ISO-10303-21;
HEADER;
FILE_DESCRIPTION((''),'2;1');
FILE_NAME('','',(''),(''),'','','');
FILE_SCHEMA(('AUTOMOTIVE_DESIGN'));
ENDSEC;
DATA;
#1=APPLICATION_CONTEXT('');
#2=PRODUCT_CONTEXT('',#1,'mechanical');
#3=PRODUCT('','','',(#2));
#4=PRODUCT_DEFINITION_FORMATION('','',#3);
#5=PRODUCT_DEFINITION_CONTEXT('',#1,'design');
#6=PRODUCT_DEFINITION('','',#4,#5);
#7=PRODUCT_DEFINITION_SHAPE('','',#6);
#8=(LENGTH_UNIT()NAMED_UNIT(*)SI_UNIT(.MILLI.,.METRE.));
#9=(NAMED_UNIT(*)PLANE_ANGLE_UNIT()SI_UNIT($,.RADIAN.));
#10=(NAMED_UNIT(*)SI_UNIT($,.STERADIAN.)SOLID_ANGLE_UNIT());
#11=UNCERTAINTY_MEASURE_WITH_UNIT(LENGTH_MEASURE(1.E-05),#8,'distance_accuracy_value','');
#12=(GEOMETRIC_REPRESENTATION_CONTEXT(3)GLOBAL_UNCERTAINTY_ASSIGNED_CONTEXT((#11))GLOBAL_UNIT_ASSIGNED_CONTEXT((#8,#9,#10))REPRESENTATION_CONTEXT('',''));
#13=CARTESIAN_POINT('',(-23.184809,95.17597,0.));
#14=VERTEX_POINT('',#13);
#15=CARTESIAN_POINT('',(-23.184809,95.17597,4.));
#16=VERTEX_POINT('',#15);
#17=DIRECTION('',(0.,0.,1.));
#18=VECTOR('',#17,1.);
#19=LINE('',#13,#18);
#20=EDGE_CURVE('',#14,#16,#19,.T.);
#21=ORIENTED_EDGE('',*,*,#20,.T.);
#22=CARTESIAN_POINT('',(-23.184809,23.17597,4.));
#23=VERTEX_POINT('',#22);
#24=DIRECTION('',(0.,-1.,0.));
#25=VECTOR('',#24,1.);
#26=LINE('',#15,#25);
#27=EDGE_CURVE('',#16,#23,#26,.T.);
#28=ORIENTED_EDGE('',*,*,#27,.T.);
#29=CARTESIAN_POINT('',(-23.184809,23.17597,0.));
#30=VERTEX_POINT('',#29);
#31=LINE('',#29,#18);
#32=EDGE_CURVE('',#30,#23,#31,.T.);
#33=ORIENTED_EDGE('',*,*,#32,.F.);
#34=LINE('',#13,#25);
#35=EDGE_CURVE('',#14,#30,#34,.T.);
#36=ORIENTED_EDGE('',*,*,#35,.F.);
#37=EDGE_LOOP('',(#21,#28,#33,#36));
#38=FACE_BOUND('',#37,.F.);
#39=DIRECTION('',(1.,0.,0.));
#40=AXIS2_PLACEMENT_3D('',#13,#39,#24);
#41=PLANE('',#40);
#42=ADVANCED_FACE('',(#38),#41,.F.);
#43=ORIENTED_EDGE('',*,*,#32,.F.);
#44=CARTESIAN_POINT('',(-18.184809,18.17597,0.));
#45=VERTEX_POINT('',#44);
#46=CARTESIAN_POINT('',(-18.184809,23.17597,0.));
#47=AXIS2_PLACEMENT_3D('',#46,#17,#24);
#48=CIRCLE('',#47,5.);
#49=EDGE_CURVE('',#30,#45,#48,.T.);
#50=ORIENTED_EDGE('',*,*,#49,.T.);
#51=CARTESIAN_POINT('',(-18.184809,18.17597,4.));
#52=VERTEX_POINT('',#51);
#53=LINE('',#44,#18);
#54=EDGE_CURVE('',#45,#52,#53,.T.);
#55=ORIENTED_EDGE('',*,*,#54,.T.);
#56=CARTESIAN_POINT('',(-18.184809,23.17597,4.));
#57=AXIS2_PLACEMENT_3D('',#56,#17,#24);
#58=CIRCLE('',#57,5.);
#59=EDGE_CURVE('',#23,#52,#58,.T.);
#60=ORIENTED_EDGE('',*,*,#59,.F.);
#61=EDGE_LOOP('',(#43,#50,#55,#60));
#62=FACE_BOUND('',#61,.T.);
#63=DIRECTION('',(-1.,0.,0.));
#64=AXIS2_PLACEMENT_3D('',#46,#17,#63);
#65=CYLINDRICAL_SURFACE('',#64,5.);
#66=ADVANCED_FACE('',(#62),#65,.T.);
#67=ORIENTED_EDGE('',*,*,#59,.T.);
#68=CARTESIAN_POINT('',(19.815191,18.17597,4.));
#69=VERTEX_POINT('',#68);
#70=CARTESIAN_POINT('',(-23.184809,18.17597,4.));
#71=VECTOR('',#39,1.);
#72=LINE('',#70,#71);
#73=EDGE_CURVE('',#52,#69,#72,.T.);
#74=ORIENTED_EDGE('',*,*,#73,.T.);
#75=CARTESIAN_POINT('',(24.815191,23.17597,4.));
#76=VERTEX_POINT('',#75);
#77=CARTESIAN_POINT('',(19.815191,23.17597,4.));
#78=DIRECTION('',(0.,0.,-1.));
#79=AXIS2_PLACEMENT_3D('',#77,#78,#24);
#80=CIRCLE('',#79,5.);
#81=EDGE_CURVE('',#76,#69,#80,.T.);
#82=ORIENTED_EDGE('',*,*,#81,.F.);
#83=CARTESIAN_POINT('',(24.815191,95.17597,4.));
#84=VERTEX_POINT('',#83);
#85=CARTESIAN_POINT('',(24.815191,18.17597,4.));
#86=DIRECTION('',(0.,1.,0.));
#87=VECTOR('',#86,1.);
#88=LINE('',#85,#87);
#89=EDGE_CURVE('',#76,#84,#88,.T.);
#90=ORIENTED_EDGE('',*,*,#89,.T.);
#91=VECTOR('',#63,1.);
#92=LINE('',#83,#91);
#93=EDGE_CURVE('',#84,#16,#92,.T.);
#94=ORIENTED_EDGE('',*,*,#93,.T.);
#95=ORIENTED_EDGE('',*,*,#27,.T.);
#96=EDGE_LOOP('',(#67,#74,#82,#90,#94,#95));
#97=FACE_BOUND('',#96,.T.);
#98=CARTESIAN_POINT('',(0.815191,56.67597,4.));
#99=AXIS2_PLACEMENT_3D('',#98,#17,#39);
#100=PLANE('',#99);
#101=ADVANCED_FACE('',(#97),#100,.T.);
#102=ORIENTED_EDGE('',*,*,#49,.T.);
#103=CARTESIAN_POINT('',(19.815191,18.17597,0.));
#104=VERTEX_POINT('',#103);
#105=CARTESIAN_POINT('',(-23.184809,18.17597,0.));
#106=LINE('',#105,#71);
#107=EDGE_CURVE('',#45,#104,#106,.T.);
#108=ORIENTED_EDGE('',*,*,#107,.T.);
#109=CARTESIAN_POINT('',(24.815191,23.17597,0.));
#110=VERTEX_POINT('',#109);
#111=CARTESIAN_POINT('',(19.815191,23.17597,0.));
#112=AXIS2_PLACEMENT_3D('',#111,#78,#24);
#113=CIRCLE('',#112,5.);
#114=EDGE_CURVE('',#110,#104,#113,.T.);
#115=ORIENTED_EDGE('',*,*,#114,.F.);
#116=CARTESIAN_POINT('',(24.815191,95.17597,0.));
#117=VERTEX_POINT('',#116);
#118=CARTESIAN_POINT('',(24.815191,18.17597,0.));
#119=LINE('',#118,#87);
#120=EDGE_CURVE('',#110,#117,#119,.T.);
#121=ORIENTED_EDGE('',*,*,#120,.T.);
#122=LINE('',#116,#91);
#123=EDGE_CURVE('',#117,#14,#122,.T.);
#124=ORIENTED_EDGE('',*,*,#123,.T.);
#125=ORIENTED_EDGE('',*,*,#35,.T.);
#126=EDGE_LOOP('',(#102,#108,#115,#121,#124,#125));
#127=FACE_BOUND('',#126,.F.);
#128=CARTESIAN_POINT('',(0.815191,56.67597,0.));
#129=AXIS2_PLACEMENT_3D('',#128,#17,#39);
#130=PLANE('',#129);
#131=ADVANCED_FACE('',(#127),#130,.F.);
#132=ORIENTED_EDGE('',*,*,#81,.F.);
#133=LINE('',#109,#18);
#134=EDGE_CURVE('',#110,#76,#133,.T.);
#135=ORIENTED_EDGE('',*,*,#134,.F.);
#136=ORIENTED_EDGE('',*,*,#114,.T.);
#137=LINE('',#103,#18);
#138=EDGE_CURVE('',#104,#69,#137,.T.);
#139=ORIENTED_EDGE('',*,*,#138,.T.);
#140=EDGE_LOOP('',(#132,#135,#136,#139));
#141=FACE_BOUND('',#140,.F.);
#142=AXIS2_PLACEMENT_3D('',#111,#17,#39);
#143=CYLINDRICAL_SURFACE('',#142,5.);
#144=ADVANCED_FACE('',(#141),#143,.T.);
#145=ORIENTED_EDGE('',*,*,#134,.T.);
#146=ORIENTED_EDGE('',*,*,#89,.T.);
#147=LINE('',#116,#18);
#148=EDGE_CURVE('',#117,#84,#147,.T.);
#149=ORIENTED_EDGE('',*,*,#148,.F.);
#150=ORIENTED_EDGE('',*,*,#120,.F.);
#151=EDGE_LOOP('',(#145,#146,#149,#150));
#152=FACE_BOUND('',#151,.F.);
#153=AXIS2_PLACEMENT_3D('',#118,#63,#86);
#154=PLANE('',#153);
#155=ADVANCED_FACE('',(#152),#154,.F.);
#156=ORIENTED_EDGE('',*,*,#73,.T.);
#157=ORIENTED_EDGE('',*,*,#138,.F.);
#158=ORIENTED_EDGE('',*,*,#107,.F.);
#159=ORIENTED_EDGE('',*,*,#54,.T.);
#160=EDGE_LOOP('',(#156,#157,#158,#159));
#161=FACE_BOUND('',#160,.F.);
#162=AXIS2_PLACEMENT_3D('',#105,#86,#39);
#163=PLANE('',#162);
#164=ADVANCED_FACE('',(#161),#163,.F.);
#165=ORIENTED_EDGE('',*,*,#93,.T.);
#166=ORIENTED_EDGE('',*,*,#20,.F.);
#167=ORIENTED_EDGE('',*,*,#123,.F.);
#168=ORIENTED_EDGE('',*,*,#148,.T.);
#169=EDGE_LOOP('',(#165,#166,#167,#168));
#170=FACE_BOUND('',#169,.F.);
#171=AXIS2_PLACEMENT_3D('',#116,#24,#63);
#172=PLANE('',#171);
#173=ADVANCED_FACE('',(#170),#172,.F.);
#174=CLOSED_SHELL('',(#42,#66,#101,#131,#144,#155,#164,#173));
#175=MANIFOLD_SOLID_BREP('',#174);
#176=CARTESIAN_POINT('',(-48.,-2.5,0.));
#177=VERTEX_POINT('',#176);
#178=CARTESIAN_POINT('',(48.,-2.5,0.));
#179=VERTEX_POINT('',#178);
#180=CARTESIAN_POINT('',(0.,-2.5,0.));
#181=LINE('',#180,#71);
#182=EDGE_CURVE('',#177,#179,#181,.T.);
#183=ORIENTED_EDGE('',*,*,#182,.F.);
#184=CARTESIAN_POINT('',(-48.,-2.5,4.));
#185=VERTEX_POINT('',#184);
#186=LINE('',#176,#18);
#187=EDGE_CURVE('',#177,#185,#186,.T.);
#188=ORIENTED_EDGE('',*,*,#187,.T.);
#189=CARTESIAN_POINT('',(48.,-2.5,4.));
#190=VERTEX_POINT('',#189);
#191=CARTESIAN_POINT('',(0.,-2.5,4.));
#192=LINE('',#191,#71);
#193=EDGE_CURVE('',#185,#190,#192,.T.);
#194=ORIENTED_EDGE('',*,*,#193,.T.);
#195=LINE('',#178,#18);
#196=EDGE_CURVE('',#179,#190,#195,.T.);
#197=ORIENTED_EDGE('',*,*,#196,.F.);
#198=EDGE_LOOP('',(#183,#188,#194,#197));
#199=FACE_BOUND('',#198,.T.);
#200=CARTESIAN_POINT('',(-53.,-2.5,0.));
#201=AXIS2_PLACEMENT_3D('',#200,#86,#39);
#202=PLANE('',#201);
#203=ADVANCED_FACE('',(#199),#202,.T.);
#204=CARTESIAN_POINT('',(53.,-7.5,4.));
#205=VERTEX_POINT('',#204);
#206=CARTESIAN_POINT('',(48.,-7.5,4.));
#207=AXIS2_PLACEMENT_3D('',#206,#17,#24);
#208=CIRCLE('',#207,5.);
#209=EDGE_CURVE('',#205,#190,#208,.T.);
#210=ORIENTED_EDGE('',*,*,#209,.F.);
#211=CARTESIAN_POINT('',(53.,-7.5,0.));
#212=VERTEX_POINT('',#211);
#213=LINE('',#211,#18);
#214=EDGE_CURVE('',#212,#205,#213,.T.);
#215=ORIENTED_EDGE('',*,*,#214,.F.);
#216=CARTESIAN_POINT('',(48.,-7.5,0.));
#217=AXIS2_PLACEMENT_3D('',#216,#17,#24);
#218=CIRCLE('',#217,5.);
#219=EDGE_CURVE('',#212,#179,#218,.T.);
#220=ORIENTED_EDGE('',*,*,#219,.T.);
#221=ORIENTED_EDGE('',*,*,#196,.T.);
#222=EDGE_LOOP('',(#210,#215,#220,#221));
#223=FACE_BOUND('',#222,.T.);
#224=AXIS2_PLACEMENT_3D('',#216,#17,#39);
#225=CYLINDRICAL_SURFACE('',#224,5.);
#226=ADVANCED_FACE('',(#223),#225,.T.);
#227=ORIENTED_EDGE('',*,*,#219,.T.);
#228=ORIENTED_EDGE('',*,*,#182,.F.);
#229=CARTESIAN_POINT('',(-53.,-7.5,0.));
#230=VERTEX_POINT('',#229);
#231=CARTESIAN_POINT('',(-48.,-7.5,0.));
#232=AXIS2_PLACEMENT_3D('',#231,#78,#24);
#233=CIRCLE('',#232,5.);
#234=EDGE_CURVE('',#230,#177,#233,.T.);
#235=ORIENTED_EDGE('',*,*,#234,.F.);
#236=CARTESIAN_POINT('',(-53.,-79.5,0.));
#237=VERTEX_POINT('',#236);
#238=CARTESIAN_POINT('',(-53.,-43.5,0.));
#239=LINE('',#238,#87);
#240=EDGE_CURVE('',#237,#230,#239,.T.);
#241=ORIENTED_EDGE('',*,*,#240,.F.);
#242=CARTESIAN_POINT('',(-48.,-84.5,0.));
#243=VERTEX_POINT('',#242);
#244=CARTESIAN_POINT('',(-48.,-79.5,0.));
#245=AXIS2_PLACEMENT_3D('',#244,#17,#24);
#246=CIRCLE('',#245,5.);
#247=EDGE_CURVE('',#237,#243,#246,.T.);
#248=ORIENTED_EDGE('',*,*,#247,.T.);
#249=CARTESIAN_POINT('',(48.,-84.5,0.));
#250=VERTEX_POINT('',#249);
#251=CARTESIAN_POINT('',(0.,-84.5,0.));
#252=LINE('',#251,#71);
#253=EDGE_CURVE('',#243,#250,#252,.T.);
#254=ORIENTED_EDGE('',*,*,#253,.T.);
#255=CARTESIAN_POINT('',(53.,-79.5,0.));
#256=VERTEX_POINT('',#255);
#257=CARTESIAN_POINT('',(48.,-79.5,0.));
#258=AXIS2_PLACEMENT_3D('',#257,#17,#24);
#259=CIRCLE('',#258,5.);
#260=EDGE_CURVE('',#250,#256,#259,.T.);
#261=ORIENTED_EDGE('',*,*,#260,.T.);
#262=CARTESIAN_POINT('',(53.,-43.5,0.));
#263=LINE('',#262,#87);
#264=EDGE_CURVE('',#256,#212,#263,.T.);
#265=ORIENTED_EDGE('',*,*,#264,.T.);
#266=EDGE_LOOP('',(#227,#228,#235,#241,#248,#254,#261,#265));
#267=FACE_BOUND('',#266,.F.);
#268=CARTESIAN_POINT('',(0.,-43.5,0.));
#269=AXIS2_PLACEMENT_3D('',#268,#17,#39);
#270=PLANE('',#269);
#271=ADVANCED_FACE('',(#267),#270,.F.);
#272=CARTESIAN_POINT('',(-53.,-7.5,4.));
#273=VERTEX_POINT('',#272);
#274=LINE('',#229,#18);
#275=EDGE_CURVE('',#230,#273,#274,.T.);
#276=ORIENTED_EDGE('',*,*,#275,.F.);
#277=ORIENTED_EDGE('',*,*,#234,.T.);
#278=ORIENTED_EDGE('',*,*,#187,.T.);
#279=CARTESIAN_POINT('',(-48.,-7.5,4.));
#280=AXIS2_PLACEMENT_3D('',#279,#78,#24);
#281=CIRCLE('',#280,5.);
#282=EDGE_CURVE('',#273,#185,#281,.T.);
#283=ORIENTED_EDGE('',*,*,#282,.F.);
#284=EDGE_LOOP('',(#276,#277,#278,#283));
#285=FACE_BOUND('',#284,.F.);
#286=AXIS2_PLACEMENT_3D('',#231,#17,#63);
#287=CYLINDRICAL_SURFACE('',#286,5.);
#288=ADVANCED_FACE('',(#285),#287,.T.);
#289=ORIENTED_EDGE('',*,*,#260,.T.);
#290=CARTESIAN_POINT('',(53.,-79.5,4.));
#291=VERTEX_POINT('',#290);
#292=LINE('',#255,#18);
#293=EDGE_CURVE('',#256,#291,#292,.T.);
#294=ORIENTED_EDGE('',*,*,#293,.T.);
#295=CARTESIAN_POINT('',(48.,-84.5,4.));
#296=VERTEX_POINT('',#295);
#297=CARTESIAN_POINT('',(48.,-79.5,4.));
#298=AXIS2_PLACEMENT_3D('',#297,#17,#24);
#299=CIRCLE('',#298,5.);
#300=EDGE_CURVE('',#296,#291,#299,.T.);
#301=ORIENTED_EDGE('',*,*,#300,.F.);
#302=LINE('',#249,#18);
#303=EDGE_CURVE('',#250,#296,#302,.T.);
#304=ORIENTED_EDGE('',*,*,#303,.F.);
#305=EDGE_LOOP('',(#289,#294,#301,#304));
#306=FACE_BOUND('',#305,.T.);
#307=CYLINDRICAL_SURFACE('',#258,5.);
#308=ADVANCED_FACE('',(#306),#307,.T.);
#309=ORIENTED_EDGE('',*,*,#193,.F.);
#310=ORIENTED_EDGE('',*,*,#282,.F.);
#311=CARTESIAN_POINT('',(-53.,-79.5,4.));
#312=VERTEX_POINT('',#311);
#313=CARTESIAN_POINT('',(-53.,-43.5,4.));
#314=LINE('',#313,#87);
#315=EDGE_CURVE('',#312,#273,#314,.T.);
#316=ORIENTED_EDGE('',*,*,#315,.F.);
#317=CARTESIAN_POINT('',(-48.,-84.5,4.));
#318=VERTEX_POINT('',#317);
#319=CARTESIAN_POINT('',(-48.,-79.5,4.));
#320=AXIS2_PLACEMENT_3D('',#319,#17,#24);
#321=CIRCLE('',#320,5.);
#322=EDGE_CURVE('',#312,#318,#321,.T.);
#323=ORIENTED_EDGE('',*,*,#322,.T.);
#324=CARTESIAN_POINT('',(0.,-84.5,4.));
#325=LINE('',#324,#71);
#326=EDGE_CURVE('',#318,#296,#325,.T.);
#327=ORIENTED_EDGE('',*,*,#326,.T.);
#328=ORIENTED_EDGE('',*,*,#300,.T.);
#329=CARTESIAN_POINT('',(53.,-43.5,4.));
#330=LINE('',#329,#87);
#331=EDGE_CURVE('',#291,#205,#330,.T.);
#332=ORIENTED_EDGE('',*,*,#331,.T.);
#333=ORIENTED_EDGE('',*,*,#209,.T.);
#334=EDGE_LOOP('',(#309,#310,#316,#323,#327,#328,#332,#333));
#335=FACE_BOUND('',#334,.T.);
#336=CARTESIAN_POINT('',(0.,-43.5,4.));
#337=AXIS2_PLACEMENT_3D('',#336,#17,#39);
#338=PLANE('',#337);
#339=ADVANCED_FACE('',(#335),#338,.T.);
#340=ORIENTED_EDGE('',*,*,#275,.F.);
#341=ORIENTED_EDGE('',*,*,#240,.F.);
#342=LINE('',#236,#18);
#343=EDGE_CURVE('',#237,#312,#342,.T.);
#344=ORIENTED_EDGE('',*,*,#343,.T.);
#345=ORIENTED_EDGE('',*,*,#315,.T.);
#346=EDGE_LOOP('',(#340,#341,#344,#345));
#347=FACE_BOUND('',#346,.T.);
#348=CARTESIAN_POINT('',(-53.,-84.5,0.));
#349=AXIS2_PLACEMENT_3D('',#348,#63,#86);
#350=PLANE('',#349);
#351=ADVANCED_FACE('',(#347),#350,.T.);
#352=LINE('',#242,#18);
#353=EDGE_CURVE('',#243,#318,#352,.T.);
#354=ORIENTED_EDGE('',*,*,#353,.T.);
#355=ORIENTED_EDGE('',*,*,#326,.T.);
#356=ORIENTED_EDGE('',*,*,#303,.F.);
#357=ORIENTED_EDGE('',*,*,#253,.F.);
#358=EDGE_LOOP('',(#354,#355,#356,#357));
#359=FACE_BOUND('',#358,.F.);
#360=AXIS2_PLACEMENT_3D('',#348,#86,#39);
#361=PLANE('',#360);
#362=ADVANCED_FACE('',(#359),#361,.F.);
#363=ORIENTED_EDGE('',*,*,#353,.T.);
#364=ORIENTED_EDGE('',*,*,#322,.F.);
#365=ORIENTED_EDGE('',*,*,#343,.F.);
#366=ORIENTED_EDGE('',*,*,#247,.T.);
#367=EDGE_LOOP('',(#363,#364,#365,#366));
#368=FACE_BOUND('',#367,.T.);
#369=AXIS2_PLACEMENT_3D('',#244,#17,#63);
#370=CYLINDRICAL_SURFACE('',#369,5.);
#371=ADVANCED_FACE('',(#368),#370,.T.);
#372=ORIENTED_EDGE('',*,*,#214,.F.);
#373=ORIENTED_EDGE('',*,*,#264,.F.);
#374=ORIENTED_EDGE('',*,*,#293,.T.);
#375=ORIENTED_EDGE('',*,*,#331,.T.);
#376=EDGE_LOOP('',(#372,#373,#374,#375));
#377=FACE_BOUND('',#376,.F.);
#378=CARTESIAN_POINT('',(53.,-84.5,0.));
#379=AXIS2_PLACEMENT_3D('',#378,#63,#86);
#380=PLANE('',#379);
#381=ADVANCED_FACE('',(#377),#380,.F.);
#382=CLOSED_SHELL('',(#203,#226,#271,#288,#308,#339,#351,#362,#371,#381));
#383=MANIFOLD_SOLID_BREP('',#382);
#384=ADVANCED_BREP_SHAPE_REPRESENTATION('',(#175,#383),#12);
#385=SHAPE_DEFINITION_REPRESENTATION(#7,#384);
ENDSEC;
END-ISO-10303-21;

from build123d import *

# Parameters (mm, degrees)
F0_W     = 106
F0_H     = 82
F2_DEPTH = 4
F3_R     = 5
F3_2_R   = 5


# Not quite as in the source:
# - a feature names something its author has since deleted; it is built from what else it names


with BuildPart() as f2:
    # F0 (on Top) → F2 (new body)
    with BuildSketch(Plane.XY):
        with Locations((0, -43.5)):
            Rectangle(F0_W, F0_H)
    extrude(amount=F2_DEPTH)

    # F3
    f3_edges = [f2.edges().sort_by_distance(p)[0] for p in [
        (53, -84.5, 2),
        (-53, -84.5, 2),
        (-53, -2.5, 2),
        (53, -2.5, 2),
    ]]
    fillet(f3_edges, radius=F3_R)


with BuildPart() as f2b:
    # F1 (on Top) → F2, piece 2 (new body)
    with BuildSketch(Plane.XY):
        Polygon((24.8151908007, 18.1759698881), (24.8151908007, 95.1759698881), (-23.1848091993, 95.1759698881), (-23.1848091993, 88.1759698881), (-23.1848091993, 18.1759698881), (-4.1848091993, 18.1759698881), (5.8151908007, 18.1759698881), align=None)
    extrude(amount=F2_DEPTH)

    # F3#2
    f3_2_edges = [f2b.edges().sort_by_distance(p)[0] for p in [
        (-23.184809, 18.17597, 2),
        (24.815191, 18.17597, 2),
    ]]
    fillet(f3_2_edges, radius=F3_2_R)


solid = Compound([f2.part, f2b.part])
